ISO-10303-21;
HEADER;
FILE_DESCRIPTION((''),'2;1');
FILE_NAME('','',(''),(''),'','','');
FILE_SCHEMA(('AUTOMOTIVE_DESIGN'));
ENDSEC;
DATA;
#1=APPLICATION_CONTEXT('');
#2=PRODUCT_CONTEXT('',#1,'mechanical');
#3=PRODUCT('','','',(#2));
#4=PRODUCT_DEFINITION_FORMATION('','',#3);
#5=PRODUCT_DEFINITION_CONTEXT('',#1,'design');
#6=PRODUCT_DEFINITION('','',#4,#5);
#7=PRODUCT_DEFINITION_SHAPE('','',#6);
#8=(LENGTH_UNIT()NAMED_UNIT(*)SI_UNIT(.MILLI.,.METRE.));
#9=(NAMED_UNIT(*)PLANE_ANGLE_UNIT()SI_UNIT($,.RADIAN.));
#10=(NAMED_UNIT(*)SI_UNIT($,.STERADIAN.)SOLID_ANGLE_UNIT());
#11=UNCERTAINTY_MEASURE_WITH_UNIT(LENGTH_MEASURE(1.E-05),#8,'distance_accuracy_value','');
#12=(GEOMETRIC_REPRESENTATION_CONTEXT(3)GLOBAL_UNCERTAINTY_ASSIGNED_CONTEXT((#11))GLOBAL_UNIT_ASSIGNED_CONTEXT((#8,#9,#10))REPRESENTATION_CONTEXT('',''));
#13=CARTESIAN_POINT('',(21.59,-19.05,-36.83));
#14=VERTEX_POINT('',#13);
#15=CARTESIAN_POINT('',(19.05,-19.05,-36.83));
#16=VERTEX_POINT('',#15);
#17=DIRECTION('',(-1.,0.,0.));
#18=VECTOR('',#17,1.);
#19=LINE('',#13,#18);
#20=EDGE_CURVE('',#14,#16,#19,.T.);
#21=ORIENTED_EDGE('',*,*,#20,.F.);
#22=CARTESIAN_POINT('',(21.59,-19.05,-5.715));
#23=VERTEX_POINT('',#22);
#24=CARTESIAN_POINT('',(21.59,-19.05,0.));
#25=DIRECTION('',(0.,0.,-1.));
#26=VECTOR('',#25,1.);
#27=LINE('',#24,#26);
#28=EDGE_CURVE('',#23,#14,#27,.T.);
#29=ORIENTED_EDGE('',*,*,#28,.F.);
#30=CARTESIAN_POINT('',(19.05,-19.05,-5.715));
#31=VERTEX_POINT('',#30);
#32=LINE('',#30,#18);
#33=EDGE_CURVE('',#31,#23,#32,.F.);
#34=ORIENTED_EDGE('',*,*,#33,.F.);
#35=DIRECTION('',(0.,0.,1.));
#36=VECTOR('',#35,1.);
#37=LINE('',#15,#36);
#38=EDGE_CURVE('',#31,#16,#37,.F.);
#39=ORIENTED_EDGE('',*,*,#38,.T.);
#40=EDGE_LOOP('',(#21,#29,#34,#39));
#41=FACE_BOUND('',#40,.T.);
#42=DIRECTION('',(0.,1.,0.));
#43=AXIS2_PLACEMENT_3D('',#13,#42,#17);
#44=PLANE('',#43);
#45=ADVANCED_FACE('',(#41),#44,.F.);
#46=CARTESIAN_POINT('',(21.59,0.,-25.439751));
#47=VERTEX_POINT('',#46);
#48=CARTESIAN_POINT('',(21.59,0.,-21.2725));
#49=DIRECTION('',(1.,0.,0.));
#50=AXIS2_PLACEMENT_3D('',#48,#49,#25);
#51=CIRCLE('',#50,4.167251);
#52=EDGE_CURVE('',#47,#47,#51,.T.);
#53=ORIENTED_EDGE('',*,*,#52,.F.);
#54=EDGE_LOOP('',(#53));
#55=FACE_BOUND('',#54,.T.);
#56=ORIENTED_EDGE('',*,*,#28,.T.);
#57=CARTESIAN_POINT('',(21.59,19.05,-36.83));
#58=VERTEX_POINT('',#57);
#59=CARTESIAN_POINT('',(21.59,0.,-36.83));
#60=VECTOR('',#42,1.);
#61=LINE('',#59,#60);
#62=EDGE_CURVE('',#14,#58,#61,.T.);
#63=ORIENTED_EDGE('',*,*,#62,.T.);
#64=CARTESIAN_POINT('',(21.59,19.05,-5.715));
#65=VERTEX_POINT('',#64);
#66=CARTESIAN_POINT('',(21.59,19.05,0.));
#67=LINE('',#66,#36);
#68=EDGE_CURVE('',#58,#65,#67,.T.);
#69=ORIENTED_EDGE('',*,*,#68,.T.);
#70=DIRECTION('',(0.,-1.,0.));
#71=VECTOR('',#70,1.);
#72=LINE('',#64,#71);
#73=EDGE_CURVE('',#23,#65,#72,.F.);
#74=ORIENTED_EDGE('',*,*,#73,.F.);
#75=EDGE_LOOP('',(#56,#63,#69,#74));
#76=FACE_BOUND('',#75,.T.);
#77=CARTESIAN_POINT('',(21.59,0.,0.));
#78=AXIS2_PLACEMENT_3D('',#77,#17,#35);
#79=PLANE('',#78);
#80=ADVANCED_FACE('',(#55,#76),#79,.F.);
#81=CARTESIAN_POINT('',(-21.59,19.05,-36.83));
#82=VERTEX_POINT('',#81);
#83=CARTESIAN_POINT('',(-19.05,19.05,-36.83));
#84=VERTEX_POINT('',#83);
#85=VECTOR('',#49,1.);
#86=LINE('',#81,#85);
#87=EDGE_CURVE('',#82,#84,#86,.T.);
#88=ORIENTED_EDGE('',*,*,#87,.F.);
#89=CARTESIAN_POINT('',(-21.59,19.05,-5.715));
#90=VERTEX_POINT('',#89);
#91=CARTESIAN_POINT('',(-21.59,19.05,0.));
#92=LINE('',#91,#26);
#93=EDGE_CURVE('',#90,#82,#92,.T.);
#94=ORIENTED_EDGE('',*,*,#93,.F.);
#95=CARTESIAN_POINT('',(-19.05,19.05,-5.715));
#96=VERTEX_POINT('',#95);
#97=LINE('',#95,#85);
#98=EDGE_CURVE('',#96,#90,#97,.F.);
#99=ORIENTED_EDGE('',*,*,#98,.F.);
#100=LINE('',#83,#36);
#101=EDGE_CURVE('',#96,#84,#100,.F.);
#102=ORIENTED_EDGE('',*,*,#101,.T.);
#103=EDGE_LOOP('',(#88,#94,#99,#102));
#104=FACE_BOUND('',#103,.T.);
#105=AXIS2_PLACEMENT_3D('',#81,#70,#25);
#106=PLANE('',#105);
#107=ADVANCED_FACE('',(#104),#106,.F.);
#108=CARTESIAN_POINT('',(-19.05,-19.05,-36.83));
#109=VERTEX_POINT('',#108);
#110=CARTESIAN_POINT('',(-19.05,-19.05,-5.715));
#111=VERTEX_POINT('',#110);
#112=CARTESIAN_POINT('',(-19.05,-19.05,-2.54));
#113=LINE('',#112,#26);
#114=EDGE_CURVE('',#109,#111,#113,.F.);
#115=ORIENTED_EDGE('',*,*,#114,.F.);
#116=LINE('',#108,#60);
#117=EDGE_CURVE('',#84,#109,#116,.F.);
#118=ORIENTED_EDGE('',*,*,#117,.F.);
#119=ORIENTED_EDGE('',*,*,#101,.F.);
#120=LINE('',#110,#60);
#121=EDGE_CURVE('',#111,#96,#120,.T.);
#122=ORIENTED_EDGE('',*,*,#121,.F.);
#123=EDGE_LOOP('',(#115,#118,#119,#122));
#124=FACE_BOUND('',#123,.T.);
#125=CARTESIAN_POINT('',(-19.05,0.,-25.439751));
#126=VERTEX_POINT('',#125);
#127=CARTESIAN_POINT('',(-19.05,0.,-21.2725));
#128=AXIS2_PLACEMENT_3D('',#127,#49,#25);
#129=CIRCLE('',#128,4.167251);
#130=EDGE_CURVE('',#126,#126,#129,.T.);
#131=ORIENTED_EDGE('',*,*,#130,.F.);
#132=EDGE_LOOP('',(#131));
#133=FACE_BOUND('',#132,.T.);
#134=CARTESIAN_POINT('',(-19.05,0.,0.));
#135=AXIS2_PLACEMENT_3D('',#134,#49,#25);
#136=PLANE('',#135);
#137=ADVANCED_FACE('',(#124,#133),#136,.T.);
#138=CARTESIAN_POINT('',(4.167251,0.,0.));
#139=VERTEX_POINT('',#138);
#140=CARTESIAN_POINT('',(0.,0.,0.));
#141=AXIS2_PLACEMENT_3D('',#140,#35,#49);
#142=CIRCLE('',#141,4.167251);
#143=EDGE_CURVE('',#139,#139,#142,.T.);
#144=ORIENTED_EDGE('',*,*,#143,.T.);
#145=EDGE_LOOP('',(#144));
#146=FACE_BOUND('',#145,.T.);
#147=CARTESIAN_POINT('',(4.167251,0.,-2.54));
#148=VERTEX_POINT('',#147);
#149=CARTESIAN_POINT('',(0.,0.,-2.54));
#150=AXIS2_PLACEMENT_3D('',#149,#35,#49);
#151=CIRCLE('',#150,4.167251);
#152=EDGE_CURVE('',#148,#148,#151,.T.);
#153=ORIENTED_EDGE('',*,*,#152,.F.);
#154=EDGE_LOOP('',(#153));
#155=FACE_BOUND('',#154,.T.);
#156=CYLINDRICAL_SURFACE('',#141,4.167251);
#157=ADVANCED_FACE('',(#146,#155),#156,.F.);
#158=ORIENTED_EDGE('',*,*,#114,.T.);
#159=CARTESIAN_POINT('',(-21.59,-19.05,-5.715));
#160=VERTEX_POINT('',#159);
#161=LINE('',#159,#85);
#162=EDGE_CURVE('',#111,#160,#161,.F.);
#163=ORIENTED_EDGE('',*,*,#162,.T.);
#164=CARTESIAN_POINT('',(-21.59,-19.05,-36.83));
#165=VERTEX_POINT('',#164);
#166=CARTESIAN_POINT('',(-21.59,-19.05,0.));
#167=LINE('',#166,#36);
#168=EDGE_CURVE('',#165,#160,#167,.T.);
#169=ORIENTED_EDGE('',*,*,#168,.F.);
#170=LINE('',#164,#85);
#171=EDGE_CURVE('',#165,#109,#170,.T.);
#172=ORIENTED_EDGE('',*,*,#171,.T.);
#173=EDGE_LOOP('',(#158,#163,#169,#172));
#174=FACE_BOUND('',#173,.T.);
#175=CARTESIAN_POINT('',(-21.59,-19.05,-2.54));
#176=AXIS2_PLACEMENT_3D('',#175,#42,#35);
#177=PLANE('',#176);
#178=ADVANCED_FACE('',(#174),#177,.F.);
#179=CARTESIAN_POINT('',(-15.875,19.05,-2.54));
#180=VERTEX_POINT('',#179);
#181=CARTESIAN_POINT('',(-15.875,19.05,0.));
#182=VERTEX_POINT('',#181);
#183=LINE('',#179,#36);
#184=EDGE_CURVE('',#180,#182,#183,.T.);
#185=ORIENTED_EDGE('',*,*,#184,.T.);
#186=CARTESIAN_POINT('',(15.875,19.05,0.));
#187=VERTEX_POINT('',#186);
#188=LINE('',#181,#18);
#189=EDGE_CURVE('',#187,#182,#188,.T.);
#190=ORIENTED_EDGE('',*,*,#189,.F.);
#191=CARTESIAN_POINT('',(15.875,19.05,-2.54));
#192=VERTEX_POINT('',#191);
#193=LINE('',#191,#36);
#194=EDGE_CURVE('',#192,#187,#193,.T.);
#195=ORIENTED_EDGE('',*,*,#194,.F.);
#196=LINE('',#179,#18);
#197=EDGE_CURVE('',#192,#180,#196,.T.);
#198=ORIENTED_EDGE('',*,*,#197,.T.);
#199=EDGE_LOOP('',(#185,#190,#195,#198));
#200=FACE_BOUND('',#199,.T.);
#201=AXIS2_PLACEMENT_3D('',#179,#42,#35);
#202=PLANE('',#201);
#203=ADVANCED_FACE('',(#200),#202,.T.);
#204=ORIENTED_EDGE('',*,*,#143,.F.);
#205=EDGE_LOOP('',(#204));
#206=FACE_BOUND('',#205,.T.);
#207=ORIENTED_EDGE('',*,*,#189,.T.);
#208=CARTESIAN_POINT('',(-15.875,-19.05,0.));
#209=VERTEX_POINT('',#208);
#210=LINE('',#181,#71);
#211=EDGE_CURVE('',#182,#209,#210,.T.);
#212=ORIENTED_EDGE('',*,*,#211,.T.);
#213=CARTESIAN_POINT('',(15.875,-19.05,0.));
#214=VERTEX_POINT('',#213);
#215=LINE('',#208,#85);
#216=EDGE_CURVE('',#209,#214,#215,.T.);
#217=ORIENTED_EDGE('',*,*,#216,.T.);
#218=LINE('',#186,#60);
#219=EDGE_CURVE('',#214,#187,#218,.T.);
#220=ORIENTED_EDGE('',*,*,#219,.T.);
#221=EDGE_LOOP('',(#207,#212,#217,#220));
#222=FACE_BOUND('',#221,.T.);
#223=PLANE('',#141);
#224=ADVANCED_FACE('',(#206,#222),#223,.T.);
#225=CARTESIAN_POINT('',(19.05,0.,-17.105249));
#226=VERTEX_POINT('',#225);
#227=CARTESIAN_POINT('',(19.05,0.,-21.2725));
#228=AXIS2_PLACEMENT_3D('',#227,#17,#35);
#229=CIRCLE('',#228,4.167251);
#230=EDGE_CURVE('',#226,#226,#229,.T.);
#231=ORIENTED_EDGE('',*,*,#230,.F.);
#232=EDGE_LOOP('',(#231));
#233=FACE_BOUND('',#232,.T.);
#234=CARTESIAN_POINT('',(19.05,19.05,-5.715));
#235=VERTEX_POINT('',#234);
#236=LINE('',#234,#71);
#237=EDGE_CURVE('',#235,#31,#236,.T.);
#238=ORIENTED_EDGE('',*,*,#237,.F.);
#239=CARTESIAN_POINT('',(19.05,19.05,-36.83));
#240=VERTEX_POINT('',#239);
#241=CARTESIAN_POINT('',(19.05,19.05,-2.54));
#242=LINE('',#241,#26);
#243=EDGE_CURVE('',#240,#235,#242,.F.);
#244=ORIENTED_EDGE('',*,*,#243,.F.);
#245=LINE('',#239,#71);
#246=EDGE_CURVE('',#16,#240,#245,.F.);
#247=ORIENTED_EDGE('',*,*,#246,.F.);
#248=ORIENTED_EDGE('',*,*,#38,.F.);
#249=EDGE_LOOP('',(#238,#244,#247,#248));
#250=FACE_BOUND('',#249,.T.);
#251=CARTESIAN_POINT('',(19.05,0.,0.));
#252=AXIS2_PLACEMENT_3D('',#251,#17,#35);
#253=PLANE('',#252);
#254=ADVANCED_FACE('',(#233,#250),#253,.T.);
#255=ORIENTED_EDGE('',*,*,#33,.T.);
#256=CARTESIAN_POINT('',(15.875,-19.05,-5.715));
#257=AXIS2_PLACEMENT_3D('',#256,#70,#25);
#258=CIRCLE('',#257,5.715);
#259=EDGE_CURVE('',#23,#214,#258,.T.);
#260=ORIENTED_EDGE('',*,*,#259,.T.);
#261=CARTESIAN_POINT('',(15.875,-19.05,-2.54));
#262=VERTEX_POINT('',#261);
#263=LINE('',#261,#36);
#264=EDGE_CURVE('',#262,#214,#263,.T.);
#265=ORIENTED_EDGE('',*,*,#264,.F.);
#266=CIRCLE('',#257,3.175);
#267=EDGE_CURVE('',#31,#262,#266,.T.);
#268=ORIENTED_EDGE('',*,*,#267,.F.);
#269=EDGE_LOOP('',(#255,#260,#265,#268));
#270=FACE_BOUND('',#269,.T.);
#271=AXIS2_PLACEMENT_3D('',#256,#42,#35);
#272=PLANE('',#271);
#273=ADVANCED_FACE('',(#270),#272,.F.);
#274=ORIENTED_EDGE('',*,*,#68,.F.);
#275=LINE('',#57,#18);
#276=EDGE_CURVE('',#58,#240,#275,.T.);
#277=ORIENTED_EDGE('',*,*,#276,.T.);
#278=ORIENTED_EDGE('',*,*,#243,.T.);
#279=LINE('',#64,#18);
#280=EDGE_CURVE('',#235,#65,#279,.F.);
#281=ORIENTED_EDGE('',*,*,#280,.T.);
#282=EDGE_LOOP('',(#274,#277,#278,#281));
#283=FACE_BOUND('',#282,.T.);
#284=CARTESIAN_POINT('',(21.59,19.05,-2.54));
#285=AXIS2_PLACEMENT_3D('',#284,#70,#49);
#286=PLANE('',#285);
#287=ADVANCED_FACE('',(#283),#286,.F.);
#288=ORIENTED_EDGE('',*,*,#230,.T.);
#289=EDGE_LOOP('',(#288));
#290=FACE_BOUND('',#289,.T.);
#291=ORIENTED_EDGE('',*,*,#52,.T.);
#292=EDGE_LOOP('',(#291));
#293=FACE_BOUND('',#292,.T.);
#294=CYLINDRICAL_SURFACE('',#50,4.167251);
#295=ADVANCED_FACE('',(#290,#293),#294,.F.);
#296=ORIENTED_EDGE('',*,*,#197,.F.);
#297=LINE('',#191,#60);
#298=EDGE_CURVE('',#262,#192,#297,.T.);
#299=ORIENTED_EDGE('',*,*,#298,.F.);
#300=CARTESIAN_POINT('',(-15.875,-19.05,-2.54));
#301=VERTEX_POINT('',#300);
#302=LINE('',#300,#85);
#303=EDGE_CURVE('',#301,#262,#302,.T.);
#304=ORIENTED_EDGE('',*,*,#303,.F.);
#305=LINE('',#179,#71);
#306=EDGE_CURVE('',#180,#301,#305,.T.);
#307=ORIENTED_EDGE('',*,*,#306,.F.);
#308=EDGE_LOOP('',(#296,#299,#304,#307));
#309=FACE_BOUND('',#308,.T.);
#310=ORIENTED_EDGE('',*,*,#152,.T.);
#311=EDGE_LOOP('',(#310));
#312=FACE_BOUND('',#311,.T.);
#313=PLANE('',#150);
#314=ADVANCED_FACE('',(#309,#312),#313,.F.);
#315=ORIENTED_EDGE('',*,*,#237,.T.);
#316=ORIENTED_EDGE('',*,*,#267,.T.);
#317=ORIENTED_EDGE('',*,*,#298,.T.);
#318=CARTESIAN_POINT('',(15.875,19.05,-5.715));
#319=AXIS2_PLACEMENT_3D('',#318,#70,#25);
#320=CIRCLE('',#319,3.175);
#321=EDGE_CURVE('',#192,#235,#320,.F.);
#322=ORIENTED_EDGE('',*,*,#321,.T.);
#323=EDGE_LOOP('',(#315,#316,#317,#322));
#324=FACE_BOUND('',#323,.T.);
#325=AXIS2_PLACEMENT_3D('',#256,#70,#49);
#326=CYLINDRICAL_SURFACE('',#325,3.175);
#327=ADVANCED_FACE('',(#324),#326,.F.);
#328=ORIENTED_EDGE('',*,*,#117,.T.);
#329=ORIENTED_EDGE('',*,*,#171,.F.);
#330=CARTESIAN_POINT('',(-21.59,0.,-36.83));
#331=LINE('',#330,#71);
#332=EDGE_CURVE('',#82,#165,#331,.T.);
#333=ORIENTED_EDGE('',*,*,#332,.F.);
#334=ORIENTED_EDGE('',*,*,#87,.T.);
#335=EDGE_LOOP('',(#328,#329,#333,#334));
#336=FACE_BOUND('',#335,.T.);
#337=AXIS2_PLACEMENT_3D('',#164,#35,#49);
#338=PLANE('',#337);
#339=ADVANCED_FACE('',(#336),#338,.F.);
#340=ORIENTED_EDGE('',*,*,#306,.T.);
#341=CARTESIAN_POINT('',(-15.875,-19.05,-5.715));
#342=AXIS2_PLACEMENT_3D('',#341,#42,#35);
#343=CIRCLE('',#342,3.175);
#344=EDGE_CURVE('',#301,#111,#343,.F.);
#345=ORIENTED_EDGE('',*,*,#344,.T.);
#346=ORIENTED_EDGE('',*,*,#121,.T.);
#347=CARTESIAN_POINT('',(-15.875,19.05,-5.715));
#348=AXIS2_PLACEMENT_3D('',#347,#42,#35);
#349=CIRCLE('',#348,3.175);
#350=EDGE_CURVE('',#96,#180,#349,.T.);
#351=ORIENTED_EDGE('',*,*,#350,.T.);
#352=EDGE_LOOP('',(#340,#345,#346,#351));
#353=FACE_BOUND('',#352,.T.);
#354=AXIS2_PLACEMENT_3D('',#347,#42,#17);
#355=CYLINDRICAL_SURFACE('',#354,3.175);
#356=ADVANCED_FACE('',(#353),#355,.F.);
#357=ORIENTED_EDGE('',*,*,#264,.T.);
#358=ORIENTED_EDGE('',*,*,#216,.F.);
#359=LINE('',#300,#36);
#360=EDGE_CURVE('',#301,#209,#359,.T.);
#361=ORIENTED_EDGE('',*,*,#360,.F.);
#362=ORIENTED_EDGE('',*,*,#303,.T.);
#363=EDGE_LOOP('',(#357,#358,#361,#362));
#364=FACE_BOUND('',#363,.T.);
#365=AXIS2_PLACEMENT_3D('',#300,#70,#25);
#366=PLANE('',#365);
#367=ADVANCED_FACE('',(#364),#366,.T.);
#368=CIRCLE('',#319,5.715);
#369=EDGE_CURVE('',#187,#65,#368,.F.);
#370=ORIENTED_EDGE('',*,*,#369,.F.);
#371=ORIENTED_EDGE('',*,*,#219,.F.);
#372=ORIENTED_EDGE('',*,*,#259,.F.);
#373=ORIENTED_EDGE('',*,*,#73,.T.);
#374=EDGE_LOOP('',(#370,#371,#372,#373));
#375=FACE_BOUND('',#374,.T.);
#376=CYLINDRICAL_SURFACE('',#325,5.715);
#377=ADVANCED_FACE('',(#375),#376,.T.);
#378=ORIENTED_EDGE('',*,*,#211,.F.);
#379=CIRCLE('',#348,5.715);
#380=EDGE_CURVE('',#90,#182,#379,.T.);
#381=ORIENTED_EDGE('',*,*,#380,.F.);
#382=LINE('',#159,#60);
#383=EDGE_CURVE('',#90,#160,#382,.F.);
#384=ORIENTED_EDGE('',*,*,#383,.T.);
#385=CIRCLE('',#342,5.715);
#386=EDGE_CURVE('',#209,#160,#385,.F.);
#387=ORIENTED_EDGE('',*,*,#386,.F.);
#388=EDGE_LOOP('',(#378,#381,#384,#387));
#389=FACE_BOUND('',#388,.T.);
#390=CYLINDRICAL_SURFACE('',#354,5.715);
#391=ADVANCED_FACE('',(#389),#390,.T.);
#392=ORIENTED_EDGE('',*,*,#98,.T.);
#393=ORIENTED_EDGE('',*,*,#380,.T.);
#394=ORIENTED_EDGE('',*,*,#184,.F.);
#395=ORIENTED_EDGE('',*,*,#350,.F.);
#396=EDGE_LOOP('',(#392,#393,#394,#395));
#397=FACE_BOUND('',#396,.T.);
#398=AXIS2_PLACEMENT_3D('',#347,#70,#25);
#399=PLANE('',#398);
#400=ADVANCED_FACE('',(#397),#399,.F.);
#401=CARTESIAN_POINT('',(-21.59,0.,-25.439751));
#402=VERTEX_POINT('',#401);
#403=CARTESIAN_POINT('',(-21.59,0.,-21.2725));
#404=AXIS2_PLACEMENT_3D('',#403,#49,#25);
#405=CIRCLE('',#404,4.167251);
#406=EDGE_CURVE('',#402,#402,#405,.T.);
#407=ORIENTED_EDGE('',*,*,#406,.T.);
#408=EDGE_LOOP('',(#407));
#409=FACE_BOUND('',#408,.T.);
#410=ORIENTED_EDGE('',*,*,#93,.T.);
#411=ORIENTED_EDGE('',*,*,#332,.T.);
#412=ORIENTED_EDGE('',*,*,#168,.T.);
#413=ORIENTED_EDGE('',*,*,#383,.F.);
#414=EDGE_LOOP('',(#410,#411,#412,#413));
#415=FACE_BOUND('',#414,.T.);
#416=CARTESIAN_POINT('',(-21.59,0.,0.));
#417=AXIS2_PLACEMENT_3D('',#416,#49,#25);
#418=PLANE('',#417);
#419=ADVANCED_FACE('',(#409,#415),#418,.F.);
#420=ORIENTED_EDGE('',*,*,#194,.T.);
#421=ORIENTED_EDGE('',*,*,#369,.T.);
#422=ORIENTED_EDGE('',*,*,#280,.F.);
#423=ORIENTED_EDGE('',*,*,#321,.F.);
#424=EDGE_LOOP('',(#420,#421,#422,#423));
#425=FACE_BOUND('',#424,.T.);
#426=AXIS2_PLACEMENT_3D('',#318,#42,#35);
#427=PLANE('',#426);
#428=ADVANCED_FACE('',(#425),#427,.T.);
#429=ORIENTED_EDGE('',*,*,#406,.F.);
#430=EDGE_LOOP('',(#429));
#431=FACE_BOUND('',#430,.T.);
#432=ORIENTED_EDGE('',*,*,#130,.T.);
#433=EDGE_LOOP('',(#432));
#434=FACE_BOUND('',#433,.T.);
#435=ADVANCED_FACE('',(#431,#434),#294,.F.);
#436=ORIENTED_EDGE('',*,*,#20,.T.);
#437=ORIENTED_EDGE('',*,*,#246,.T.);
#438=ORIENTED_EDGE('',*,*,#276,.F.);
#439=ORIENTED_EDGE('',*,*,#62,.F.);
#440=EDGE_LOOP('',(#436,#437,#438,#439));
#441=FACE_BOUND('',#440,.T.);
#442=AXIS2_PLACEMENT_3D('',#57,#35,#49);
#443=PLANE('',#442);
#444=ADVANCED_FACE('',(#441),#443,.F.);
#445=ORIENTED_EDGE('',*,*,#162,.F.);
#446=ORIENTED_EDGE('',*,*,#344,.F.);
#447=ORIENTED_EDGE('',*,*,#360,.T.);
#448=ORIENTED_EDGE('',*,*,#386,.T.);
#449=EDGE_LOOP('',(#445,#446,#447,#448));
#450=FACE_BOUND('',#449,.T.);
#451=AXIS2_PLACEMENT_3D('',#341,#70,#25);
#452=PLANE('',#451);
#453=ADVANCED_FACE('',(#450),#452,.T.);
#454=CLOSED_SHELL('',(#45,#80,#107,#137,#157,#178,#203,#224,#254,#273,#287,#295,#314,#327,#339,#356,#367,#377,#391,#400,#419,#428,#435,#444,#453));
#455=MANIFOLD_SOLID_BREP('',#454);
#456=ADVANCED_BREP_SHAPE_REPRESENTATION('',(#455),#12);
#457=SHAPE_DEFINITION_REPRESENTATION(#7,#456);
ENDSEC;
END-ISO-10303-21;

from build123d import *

# Parameters (mm, degrees)
SKETCH2_W                            = 31.75
SKETCH2_H                            = 38.1
BASE_FLANGE1_DEPTH                   = 2.54
EDGE_FLANGE2_DEPTH                   = 38.1
EDGE_FLANGE2_BEND_DEPTH              = 38.1
F_21_64_0_32813_DIAMETER_HOLE1_D     = 8.334502
F_21_64_0_32813_DIAMETER_HOLE1_DEPTH = 25.4
F_21_64_0_32813_DIAMETER_HOLE1_TIP   = 2.503937016
F_21_64_0_32813_DIAMETER_HOLE2_D     = 8.334502


# Sheet-metal steps are written as plain solids
with BuildPart() as part:
    # Sketch2 → Base-Flange1 (new body)
    with BuildSketch(Plane.XY):
        Rectangle(SKETCH2_W, SKETCH2_H)
    extrude(amount=-BASE_FLANGE1_DEPTH)

    # Edge-Flange2 section (across the edge) → Edge-Flange2 (add)
    with BuildSketch(Plane(origin=(19.05, 19.05, -2.54), x_dir=(-1, 0, 0), z_dir=(0, -1, 0))):
        with BuildLine():
            Line((-2.54, 3.175), (-2.54, 34.29))
            Line((-2.54, 34.29), (0, 34.29))
            Line((0, 34.29), (0, 3.175))
            ThreePointArc((0, 3.175), (0.92993597, 0.92993597), (3.175, 0))
            Line((3.175, 0), (3.175, -2.54))
            ThreePointArc((3.175, -2.54), (-0.866115254, -0.866115254), (-2.54, 3.175))
        make_face()
    extrude(amount=EDGE_FLANGE2_DEPTH)

    # Edge-Flange2 section 2 (across the edge) → Edge-Flange2 bend (add)
    with BuildSketch(Plane(origin=(-19.05, -19.05, -2.54), x_dir=(1, 0, 0), z_dir=(0, 1, 0))):
        with BuildLine():
            Line((-2.54, 3.175), (-2.54, 34.29))
            Line((-2.54, 34.29), (0, 34.29))
            Line((0, 34.29), (0, 3.175))
            ThreePointArc((0, 3.175), (0.92993597, 0.92993597), (3.175, 0))
            Line((3.175, 0), (3.175, -2.54))
            ThreePointArc((3.175, -2.54), (-0.866115254, -0.866115254), (-2.54, 3.175))
        make_face()
    extrude(amount=EDGE_FLANGE2_BEND_DEPTH)

    # 21/64 (0.32813) Diameter Hole1
    with Locations(Plane.XY):
        with Locations((0, 0)):
            Hole(F_21_64_0_32813_DIAMETER_HOLE1_D / 2, depth=F_21_64_0_32813_DIAMETER_HOLE1_DEPTH)
            with Locations((0, 0, -(F_21_64_0_32813_DIAMETER_HOLE1_DEPTH + F_21_64_0_32813_DIAMETER_HOLE1_TIP / 2))):  # 118° drill point
                Cone(0, F_21_64_0_32813_DIAMETER_HOLE1_D / 2, F_21_64_0_32813_DIAMETER_HOLE1_TIP, mode=Mode.SUBTRACT)

    # 21/64 (0.32813) Diameter Hole2 (through all)
    with Locations(Plane(origin=(21.59, 0, 0), x_dir=(0, 0, -1), z_dir=(1, 0, 0))):
        with Locations((21.2725, 0)):
            Hole(F_21_64_0_32813_DIAMETER_HOLE2_D / 2)


solid = part.part
